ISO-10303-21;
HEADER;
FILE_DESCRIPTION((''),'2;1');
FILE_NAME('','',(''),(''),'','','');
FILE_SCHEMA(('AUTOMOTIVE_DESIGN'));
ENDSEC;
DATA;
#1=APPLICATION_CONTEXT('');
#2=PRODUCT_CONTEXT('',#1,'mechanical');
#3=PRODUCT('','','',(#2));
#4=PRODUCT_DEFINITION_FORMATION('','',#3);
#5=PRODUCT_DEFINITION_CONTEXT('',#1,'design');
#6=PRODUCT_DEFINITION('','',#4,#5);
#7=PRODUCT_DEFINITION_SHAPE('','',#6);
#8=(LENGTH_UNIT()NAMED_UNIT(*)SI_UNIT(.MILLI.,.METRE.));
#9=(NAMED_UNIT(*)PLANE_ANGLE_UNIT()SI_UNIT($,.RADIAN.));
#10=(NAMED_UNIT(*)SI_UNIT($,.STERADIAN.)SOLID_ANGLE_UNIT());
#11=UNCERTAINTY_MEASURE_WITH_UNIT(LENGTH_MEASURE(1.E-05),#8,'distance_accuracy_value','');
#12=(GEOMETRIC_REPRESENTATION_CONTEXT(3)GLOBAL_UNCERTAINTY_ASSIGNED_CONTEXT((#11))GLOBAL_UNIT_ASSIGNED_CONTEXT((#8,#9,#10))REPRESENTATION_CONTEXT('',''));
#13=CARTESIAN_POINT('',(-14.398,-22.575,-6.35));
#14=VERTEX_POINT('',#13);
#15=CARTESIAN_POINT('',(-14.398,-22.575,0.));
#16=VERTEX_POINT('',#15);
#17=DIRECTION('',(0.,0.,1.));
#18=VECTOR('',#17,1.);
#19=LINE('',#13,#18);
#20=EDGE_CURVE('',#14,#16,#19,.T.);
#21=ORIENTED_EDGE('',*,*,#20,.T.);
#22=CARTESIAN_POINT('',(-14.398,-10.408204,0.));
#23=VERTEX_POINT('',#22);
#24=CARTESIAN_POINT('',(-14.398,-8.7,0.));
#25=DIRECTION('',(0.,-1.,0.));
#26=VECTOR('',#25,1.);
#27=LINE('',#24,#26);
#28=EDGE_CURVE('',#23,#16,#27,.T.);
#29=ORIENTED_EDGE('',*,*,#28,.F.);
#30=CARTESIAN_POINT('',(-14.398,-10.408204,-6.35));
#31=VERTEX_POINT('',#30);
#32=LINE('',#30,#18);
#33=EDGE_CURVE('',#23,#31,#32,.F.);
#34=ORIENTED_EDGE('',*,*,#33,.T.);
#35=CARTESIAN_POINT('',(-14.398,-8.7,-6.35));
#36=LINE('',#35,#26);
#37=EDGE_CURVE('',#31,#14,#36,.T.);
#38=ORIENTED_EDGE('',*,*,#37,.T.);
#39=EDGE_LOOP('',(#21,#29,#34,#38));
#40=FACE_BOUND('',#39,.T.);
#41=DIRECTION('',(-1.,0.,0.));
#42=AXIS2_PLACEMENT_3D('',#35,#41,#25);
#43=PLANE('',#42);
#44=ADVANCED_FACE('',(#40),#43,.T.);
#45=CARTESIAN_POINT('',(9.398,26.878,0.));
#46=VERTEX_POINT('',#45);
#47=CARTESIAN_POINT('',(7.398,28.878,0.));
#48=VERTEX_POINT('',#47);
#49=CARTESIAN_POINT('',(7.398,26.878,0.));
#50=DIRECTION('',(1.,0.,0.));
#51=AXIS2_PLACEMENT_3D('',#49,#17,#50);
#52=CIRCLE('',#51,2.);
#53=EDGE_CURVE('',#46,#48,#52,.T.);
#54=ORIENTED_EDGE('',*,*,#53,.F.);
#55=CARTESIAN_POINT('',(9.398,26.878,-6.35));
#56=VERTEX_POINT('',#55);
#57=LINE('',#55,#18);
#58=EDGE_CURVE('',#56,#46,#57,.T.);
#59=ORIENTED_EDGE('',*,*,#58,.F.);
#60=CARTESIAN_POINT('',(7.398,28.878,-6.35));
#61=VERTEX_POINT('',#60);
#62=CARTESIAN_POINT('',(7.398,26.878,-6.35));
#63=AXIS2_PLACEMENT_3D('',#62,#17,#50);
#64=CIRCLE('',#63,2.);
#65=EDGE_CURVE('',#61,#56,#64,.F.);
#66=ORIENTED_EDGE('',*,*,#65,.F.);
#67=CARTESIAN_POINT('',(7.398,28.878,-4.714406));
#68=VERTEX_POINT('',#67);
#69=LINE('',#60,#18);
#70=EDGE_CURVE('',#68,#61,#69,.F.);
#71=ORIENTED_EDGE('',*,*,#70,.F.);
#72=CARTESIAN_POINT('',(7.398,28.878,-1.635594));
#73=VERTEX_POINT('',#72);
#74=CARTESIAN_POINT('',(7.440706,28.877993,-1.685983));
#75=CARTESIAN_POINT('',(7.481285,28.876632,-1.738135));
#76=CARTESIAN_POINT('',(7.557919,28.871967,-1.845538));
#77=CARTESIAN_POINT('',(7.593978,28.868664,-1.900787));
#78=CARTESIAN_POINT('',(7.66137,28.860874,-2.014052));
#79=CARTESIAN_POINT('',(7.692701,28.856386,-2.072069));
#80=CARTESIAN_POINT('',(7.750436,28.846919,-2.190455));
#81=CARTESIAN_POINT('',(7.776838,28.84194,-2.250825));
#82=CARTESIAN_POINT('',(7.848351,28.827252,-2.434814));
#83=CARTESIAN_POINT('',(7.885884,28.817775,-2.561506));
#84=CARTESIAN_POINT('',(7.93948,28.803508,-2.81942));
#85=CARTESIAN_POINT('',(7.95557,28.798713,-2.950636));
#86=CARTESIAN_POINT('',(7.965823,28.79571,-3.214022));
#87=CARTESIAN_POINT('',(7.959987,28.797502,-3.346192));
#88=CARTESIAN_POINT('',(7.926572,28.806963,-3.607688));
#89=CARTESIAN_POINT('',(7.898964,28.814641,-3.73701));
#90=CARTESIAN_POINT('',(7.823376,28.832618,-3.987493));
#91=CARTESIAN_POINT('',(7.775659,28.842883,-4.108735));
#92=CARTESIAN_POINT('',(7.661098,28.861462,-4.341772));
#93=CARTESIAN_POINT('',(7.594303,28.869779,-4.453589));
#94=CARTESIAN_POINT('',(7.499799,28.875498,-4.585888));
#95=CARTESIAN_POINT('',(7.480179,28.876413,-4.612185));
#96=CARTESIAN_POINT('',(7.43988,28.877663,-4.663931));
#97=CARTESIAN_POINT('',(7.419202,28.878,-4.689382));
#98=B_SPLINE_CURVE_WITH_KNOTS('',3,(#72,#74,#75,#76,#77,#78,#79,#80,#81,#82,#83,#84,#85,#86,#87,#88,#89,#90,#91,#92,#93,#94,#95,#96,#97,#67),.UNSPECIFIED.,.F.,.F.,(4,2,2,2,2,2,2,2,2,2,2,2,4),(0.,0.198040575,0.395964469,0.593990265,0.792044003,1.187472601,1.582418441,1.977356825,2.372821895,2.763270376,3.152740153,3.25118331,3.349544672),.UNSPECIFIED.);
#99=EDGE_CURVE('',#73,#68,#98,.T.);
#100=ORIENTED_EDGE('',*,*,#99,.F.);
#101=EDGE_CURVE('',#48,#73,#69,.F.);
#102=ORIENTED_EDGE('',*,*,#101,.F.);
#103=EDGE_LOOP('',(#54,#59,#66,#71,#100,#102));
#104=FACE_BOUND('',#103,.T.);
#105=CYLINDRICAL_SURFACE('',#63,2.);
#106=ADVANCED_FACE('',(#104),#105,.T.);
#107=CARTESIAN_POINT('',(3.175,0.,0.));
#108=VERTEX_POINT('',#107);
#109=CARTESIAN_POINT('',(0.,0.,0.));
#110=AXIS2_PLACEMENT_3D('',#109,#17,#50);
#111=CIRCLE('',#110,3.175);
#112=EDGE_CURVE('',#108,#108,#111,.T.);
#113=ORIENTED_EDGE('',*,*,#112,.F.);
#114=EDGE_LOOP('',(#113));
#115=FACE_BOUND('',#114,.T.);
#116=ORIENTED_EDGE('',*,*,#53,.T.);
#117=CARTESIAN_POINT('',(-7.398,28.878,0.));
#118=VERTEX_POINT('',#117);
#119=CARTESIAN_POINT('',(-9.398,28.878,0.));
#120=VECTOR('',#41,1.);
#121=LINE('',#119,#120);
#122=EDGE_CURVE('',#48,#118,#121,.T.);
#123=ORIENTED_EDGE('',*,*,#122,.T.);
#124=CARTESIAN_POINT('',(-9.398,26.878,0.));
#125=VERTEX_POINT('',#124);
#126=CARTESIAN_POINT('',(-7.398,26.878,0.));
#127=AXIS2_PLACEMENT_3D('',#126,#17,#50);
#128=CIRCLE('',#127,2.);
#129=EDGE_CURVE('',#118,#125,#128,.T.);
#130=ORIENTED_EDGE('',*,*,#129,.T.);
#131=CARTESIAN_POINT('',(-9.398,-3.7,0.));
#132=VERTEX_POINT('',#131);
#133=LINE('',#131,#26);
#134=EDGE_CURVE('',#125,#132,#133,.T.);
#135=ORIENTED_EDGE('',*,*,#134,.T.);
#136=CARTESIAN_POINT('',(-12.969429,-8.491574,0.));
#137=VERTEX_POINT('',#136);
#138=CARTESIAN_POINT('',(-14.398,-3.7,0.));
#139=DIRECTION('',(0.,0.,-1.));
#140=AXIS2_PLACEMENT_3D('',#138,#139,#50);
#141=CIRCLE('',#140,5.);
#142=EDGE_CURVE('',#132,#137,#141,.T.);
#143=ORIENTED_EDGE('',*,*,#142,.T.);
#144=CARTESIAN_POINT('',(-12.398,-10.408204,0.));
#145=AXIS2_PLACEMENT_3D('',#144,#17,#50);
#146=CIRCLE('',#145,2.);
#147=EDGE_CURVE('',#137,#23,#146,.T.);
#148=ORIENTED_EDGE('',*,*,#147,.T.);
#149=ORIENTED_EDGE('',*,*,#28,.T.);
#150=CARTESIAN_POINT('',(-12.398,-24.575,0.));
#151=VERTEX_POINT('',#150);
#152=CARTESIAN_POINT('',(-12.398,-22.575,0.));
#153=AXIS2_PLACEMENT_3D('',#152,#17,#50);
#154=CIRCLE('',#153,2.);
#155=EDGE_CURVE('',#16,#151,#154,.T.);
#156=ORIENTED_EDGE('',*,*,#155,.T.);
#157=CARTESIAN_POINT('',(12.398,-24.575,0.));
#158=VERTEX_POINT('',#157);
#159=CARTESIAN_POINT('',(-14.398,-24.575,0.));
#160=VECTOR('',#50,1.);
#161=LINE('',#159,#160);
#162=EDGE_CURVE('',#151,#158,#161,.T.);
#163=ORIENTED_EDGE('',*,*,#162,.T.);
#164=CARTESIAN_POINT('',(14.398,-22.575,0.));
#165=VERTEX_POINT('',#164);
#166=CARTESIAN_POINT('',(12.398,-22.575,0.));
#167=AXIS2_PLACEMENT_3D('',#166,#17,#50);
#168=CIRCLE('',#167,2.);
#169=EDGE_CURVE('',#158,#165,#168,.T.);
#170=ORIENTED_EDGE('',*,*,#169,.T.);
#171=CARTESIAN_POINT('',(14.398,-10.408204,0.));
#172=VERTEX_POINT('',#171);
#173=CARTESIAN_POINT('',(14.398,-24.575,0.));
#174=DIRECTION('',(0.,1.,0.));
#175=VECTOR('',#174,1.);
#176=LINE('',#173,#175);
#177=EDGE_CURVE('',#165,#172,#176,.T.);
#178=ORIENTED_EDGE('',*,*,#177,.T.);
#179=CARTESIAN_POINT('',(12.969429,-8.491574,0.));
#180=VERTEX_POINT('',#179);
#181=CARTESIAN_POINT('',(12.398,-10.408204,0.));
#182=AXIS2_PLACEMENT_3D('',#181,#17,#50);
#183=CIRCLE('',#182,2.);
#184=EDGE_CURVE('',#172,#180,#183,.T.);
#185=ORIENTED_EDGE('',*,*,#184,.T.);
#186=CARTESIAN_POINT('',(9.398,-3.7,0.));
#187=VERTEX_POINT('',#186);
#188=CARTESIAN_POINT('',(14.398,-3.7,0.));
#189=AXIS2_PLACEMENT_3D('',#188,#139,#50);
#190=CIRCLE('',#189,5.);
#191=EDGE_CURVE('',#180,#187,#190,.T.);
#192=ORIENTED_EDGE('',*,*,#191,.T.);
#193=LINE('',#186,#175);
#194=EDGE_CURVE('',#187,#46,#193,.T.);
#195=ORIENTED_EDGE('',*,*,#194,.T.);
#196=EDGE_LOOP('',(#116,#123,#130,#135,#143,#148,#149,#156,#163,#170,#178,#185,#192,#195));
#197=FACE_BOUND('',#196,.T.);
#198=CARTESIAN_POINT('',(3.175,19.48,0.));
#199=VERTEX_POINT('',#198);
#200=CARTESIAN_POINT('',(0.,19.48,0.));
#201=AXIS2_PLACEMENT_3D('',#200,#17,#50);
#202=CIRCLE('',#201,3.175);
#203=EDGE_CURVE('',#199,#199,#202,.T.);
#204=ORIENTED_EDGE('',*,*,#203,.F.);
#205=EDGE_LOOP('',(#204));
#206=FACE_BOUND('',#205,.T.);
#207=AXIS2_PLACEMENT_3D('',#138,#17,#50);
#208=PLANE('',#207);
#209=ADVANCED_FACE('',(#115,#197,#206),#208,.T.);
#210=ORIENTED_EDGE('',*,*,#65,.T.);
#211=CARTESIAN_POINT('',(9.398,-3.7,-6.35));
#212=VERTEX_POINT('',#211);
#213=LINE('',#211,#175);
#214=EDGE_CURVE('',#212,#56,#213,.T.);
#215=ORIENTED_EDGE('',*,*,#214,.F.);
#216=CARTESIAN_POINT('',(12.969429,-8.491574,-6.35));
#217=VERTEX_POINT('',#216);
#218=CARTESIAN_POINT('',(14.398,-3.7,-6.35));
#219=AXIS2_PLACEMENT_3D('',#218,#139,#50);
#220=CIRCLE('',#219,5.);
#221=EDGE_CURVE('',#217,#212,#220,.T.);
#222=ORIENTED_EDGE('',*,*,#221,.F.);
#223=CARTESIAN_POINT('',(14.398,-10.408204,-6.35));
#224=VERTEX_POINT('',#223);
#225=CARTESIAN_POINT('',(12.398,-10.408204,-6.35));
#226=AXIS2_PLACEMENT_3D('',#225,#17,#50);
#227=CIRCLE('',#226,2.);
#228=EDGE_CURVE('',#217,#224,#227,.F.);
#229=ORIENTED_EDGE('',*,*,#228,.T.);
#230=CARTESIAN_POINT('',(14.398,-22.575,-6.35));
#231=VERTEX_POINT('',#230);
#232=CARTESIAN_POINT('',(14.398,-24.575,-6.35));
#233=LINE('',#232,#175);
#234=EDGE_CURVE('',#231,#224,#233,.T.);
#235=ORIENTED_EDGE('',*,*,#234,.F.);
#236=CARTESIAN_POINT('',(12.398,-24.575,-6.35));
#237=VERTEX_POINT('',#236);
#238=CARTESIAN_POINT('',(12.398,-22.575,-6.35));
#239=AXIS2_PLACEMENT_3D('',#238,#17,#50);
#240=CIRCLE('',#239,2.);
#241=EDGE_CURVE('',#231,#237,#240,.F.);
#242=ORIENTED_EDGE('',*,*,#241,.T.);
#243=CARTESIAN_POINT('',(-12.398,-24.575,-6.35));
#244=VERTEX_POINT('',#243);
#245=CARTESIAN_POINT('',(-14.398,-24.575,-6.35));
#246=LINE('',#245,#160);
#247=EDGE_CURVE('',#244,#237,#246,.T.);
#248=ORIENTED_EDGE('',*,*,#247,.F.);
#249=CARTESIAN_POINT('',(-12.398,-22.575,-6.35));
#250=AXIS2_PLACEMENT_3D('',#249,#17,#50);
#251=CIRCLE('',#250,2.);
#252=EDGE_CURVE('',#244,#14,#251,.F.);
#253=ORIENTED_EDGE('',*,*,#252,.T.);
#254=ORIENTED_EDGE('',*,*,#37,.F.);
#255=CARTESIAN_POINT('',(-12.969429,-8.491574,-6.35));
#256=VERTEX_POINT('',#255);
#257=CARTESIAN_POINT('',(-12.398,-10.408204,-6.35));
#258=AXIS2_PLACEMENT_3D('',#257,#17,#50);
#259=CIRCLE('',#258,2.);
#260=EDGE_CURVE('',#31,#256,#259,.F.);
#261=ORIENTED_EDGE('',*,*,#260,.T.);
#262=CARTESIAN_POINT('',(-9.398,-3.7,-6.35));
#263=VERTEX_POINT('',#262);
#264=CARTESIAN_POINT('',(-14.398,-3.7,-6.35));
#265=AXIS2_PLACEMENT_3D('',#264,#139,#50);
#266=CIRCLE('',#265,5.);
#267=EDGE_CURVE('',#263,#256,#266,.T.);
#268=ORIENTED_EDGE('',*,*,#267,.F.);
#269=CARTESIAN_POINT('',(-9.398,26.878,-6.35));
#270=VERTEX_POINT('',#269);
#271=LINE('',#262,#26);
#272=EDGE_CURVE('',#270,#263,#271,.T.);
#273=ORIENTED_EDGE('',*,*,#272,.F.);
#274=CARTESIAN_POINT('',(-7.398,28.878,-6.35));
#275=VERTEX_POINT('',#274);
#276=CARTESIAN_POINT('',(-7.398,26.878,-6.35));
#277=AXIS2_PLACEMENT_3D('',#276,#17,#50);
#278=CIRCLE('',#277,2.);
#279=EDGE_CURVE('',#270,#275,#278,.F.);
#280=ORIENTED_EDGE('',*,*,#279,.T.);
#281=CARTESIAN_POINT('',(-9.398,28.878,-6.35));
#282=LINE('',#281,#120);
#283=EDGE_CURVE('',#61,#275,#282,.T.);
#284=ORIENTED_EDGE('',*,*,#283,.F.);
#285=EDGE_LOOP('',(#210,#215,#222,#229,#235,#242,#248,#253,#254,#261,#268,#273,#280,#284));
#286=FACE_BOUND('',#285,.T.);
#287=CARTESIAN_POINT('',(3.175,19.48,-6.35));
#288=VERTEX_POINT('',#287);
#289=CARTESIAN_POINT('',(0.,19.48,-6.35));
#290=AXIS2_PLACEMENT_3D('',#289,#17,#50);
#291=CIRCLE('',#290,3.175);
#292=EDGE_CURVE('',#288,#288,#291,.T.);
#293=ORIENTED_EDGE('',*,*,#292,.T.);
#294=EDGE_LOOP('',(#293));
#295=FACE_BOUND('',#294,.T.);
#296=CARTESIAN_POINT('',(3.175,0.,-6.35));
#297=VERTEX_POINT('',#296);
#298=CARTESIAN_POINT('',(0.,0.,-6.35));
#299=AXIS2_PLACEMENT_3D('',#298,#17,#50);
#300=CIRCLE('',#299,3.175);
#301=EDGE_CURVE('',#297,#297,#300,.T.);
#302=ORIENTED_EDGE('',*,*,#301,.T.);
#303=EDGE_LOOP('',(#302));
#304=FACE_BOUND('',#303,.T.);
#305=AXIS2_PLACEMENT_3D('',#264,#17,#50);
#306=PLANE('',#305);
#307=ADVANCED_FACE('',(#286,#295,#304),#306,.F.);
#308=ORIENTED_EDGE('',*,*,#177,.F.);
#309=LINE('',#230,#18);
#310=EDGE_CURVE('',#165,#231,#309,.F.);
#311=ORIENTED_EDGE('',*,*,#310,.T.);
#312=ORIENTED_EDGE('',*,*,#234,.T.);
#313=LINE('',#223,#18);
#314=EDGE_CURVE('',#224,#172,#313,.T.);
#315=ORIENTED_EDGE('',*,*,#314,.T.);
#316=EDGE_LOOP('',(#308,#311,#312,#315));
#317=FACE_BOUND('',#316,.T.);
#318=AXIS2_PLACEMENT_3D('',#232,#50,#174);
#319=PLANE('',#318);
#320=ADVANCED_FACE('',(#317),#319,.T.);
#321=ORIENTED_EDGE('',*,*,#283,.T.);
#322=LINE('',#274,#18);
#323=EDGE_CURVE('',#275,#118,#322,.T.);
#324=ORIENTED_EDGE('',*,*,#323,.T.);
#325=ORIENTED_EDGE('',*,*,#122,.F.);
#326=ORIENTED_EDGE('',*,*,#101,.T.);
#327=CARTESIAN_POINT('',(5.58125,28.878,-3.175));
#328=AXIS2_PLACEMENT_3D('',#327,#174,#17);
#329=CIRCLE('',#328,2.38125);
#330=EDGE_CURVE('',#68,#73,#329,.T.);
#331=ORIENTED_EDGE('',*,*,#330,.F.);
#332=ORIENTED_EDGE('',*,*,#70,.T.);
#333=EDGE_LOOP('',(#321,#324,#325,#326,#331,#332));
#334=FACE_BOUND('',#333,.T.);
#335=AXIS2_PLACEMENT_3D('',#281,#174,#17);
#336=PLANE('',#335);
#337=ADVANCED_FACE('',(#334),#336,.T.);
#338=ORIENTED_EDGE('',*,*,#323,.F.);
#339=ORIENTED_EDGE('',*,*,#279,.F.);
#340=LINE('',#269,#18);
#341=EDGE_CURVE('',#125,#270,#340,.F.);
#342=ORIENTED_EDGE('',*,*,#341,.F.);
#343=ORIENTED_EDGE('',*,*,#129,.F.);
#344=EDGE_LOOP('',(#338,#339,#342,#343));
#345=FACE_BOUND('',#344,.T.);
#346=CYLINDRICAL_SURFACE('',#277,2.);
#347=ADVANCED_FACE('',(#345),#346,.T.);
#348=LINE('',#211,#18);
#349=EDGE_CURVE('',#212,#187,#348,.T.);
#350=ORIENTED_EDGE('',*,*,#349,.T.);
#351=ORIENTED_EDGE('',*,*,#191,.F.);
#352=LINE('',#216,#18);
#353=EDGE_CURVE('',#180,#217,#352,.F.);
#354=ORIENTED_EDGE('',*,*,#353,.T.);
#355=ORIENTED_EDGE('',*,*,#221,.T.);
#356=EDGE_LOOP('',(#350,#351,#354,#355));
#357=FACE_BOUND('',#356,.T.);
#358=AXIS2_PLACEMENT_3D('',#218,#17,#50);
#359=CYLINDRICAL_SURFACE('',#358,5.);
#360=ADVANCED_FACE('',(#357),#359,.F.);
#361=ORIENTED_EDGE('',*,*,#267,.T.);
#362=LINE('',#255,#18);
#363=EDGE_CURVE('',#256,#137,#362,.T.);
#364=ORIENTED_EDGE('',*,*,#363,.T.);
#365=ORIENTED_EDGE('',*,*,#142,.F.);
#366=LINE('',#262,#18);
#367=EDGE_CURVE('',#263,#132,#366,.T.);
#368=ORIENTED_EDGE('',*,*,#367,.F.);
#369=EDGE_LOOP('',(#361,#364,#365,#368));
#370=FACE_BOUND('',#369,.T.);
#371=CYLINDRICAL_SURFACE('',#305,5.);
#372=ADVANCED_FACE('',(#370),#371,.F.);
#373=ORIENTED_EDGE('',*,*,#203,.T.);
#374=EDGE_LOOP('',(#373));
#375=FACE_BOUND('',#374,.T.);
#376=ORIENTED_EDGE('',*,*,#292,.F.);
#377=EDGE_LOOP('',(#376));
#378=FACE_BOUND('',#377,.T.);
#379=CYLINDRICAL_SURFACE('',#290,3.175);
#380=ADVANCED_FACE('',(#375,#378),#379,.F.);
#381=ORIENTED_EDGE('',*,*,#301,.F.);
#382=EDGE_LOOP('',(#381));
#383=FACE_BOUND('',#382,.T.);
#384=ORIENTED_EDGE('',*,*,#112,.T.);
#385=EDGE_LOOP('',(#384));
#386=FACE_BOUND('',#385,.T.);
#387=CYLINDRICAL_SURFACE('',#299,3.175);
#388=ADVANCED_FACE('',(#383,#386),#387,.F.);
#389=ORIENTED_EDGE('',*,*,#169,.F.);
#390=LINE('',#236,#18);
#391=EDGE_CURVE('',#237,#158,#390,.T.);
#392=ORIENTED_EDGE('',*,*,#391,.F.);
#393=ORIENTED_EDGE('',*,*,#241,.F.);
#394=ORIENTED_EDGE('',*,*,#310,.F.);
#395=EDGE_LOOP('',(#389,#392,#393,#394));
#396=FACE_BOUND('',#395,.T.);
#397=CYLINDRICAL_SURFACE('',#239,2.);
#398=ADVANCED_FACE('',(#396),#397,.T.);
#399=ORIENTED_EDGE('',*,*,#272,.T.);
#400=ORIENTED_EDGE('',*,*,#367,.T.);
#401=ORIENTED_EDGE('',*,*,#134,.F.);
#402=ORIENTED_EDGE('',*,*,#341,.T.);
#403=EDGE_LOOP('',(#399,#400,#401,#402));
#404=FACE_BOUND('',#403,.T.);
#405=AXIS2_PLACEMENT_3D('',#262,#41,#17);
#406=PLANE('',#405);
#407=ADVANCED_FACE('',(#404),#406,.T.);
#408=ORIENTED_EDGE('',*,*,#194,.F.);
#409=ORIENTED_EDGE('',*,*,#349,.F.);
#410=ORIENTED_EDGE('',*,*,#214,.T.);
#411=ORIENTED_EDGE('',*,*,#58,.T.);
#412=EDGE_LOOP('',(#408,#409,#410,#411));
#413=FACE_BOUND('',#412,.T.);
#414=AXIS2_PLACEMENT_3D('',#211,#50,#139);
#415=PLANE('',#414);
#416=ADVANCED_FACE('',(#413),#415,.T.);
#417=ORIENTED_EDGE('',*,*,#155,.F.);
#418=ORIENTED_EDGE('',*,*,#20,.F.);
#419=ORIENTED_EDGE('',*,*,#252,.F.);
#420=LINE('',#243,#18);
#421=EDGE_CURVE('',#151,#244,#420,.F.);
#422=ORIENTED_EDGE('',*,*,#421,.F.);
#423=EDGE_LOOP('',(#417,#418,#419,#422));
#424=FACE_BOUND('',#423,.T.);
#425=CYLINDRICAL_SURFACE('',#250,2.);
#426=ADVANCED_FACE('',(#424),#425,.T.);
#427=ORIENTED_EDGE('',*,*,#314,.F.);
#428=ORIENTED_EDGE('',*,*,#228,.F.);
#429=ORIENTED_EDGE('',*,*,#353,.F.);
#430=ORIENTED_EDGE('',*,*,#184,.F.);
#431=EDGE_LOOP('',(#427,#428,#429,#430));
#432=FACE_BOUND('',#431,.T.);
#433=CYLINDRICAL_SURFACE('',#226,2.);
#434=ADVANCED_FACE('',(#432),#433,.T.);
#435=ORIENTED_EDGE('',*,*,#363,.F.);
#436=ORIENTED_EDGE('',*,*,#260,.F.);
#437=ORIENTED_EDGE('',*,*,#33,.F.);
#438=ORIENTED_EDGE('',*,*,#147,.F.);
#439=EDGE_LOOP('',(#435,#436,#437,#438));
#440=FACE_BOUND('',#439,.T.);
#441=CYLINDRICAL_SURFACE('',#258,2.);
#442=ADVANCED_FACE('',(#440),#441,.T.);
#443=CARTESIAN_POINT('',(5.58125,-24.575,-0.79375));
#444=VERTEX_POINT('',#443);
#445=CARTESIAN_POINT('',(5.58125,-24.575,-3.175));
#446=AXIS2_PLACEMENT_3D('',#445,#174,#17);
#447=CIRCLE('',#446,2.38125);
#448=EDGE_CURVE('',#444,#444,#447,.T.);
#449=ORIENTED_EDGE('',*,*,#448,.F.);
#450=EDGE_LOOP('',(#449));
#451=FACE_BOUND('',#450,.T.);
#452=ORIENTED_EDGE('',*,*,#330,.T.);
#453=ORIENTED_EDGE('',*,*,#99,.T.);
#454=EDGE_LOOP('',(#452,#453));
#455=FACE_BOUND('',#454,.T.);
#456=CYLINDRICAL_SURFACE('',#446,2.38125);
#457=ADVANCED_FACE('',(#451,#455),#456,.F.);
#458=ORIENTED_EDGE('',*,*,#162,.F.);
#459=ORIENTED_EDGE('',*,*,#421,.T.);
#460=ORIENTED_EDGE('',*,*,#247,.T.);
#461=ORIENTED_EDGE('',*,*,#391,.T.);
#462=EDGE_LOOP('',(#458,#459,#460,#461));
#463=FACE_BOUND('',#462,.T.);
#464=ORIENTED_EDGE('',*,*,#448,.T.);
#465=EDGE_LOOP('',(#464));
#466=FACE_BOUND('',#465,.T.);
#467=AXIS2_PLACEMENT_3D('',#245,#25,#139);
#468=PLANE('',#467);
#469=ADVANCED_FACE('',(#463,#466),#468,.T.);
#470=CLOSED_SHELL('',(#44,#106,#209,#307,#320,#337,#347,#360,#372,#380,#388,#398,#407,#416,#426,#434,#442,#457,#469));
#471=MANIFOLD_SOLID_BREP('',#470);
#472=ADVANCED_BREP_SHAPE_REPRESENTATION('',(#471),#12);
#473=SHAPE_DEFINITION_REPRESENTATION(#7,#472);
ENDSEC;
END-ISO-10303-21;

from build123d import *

# Parameters (mm, degrees)
SKETCH1_R           = 3.175
BOSS_EXTRUDE1_DEPTH = 6.35
SKETCH2_R           = 2.38125
CUT_EXTRUDE2_DEPTH  = 56.721163959
FILLET1_R           = 2


with BuildPart() as part:
    # Sketch1 → Boss-Extrude1 (new body)
    with BuildSketch(Plane.XY):
        with BuildLine():
            Line((9.398, -3.7), (9.398, 28.878))
            Line((9.398, 28.878), (-9.398, 28.878))
            Line((-9.398, 28.878), (-9.398, -3.7))
            ThreePointArc((-9.398, -3.7), (-10.862466094, -7.235533906), (-14.398, -8.7))
            Line((-14.398, -8.7), (-14.398, -24.575))
            Line((-14.398, -24.575), (14.398, -24.575))
            Line((14.398, -24.575), (14.398, -8.7))
            ThreePointArc((14.398, -8.7), (10.862466094, -7.235533906), (9.398, -3.7))
        make_face()
        Circle(SKETCH1_R, mode=Mode.SUBTRACT)
        with Locations((0, 19.48)):
            Circle(SKETCH1_R, mode=Mode.SUBTRACT)
    extrude(amount=-BOSS_EXTRUDE1_DEPTH)

    # Sketch2 → Cut-Extrude2 (cut, through all)
    with BuildSketch(Plane(origin=(0, 28.878, 0), x_dir=(1, 0, 0), z_dir=(0, 1, 0))):
        with Locations(Location((5.58125, 3.175, 0), (0, 0, 270))):
            Circle(SKETCH2_R)
    extrude(amount=-CUT_EXTRUDE2_DEPTH, mode=Mode.SUBTRACT)

    # Fillet1
    # the kernel refuses this fillet: 2 mm, written as the material it takes off along each edge
    with BuildSketch(Plane(origin=(-9.398, 28.878, 5), x_dir=(1, 0, 0), z_dir=(0, 0, -1)), Plane(origin=(9.398, 28.878, 5), x_dir=(0, -1, 0), z_dir=(0, 0, -1)), Plane(origin=(-14.398, -24.575, 5), x_dir=(0, 1, 0), z_dir=(0, 0, -1))) as fillet1_piece_1:
        with BuildLine():
            CenterArc((FILLET1_R, FILLET1_R), FILLET1_R, 180, 90)
            Line((0, FILLET1_R), (0, 0))
            Line((0, 0), (FILLET1_R, 0))
        make_face()
    extrude(amount=16.35, mode=Mode.SUBTRACT)
    with BuildSketch(Plane(origin=(14.398, -8.7, 4.270509831), x_dir=(-0.9895238368781003, 0.14436958214957393, 0), z_dir=(0, 0, -1))) as fillet1_piece_2:
        with BuildLine():
            CenterArc((1.732434986, -1.979047674), FILLET1_R, 98.3007748, 73.398450401)
            Line((-0.246612688, -1.690308509), (0, 0))
            ThreePointArc((0, 0), (0.721847911, -0.052380816), (1.443695821, 0))
        make_face()
    extrude(amount=14.891019662, mode=Mode.SUBTRACT)
    with BuildSketch(Plane(origin=(14.398, -24.575, 5), x_dir=(0, 1, 0), z_dir=(0, 0, -1))) as fillet1_piece_3:
        with BuildLine():
            CenterArc((FILLET1_R, -FILLET1_R), FILLET1_R, 90, 90)
            Line((0, -FILLET1_R), (0, 0))
            Line((0, 0), (FILLET1_R, 0))
        make_face()
    extrude(amount=16.35, mode=Mode.SUBTRACT)
    with BuildSketch(Plane(origin=(-14.398, -8.7, 4.270509831), x_dir=(0.9895238368781003, 0.14436958214957393, 0), z_dir=(0, 0, -1))) as fillet1_piece_4:
        with BuildLine():
            CenterArc((1.732434986, 1.979047674), FILLET1_R, 188.300774799, 73.398450401)
            Line((-0.246612688, 1.690308509), (0, 0))
            ThreePointArc((0, 0), (0.721847911, 0.052380816), (1.443695821, 0))
        make_face()
    extrude(amount=14.891019662, mode=Mode.SUBTRACT)


solid = part.part
